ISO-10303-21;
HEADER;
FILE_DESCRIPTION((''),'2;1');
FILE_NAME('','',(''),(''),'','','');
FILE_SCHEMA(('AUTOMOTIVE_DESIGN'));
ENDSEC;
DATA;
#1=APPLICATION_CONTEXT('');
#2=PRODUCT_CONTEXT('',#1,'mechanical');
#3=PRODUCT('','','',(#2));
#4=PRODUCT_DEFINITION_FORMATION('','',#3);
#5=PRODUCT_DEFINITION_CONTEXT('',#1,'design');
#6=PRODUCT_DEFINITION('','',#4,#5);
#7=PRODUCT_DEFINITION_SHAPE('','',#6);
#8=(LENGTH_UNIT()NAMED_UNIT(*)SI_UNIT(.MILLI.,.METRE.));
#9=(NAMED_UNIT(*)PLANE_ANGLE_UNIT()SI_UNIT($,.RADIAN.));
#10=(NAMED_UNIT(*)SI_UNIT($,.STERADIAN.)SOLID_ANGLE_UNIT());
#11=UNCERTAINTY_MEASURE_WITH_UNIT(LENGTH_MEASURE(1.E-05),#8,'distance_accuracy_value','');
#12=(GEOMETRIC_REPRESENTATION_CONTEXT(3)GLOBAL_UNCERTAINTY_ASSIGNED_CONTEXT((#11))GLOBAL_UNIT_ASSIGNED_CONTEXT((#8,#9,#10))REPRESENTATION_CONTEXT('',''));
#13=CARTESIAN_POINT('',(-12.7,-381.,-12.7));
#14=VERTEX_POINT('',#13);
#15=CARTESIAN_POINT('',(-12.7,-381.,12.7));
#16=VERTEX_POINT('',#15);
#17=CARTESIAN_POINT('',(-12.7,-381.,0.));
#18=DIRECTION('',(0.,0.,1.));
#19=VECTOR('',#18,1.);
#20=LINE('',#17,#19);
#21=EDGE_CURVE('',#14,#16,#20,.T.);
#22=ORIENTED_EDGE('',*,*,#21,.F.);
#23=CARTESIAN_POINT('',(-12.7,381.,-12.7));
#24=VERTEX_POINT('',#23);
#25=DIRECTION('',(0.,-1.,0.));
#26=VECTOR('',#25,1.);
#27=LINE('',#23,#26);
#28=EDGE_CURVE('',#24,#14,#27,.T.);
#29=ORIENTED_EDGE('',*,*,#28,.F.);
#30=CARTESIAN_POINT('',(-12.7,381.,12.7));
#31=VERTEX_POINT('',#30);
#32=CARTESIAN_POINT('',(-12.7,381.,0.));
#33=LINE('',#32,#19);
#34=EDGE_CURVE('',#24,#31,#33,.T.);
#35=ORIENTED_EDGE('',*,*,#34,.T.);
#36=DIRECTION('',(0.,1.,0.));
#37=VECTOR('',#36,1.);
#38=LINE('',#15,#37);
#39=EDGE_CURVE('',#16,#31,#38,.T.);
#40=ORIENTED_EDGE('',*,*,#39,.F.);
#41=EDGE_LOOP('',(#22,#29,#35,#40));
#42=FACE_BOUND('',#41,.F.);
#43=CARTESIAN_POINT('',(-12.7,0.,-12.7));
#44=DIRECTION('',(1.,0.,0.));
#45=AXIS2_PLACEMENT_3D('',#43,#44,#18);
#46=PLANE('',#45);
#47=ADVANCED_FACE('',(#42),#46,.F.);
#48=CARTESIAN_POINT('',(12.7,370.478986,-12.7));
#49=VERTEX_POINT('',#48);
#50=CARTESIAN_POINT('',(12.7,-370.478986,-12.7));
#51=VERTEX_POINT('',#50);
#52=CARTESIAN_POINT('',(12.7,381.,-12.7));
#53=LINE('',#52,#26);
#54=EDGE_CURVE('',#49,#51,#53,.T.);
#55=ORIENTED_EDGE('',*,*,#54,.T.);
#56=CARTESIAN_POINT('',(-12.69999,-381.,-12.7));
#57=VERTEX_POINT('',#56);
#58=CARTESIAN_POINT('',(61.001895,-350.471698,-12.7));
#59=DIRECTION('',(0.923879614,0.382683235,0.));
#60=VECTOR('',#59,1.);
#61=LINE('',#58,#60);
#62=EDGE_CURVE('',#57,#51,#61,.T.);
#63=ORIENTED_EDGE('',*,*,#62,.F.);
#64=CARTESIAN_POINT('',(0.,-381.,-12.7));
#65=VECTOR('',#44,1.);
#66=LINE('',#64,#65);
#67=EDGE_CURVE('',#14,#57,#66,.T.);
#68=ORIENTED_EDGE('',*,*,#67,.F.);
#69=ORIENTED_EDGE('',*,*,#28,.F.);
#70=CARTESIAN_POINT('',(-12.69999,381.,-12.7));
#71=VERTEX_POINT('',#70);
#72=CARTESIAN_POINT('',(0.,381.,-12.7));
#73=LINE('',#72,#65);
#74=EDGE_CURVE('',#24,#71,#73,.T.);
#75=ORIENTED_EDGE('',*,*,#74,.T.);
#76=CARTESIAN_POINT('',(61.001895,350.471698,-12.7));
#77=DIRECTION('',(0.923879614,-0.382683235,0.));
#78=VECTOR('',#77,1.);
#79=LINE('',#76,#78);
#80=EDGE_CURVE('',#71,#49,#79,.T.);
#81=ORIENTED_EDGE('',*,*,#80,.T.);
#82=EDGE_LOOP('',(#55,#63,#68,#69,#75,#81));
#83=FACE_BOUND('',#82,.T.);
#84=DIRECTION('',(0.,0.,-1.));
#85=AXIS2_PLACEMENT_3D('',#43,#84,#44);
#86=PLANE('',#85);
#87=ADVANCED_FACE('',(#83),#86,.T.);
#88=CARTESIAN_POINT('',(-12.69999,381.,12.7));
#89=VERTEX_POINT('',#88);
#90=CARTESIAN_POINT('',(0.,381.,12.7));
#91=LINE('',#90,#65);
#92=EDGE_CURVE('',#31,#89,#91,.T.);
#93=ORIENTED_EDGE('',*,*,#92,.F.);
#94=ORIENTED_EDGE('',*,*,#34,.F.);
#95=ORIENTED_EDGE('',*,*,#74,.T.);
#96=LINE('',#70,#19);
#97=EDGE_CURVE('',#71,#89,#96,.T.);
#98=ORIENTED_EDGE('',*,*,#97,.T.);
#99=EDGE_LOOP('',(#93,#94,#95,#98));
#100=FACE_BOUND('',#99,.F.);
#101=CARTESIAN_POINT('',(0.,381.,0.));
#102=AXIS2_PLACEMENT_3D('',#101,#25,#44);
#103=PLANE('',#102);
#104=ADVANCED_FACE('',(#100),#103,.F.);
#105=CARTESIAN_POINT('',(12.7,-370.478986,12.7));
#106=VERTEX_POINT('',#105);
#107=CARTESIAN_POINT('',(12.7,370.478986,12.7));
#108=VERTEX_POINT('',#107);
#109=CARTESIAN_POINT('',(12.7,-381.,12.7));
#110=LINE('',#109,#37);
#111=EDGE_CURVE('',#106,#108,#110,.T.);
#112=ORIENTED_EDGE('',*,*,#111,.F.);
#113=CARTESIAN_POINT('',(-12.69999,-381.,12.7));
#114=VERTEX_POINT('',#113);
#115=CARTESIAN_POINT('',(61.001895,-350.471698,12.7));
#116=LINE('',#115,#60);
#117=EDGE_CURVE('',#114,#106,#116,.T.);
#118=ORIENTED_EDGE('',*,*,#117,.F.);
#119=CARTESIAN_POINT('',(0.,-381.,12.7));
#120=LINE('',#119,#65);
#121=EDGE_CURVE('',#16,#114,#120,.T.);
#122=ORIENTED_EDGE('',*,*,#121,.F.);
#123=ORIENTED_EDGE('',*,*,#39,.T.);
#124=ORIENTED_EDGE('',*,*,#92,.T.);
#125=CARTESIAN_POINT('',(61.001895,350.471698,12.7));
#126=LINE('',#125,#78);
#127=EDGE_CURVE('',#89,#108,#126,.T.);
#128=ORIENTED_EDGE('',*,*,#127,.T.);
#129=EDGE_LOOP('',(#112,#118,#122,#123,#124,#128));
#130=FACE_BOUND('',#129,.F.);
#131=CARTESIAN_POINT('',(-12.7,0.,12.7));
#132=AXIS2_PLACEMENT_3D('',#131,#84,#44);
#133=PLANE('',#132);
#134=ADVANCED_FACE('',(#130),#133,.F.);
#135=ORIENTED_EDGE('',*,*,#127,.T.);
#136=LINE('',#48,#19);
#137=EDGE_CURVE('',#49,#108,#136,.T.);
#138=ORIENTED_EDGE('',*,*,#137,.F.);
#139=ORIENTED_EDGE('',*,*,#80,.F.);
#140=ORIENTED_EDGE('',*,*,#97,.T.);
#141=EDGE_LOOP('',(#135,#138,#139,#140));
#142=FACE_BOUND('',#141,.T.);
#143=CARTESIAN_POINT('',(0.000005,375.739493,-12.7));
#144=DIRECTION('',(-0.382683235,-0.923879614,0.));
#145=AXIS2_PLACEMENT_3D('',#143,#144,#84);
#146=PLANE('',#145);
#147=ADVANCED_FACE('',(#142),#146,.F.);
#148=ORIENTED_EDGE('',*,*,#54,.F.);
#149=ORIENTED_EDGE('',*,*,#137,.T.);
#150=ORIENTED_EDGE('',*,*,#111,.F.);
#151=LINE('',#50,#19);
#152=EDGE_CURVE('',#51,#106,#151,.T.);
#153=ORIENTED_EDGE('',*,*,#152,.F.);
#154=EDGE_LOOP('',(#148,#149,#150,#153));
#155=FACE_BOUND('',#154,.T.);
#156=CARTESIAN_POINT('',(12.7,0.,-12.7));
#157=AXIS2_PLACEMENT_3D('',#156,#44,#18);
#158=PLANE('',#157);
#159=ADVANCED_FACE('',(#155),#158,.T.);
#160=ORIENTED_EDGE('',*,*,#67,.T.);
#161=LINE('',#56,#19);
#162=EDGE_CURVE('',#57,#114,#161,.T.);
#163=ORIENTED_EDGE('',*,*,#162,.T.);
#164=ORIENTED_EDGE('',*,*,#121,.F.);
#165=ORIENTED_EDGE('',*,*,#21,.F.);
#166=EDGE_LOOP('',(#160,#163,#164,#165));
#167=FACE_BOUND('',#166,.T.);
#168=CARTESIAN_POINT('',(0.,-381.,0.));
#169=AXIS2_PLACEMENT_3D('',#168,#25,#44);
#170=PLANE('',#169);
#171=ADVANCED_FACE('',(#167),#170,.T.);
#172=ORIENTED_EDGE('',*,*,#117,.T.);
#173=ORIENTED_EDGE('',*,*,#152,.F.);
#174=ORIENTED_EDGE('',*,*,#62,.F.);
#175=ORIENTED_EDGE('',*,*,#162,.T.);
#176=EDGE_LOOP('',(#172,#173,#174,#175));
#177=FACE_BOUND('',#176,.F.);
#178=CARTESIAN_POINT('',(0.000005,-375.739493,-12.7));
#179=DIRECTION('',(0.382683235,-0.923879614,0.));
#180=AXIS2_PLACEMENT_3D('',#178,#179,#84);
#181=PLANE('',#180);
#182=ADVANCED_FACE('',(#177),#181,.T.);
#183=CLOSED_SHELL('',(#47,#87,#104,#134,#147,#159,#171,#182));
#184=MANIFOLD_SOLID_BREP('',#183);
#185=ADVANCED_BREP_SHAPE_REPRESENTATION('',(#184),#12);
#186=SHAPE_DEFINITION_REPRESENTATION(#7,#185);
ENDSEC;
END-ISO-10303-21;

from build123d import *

# Parameters (mm, degrees)
F0_W       = 25.4
F0_H       = 25.4
F1_DEPTH   = 381
F2_SIZE2   = 10.521014
F2_SIZE    = 25.39999
F2_2_SIZE2 = 10.521014
F2_2_SIZE  = 25.39999


# Not quite as in the source:
# - a fillet or chamfer is up to 0.001 mm smaller than in the source, because OpenCascade refuses the exact size


with BuildPart() as f1:
    # F0 (on Front) → F1 (new body, symmetric)
    with BuildSketch(Plane.XZ):
        Rectangle(F0_W, F0_H)
    extrude(amount=F1_DEPTH, both=True)

    # F2 (size 25.4 and 10.5210244843 in the source; OpenCascade refuses exactly that, so slightly less here)
    f2_edges = [f1.edges().sort_by_distance(p)[0] for p in [
        (12.7, -381, 0),
    ]]
    f2_side = f1.faces().sort_by_distance((0, -381, 0))[0]
    chamfer(f2_edges, length=F2_SIZE, length2=F2_SIZE2, reference=f2_side)

    # F2#2 (size 25.4 and 10.5210244843 in the source; OpenCascade refuses exactly that, so slightly less here)
    f2_2_edges = [f1.edges().sort_by_distance(p)[0] for p in [
        (12.7, 381, 0),
    ]]
    f2_2_side = f1.faces().sort_by_distance((0, 381, 0))[0]
    chamfer(f2_2_edges, length=F2_2_SIZE, length2=F2_2_SIZE2, reference=f2_2_side)


solid = f1.part
